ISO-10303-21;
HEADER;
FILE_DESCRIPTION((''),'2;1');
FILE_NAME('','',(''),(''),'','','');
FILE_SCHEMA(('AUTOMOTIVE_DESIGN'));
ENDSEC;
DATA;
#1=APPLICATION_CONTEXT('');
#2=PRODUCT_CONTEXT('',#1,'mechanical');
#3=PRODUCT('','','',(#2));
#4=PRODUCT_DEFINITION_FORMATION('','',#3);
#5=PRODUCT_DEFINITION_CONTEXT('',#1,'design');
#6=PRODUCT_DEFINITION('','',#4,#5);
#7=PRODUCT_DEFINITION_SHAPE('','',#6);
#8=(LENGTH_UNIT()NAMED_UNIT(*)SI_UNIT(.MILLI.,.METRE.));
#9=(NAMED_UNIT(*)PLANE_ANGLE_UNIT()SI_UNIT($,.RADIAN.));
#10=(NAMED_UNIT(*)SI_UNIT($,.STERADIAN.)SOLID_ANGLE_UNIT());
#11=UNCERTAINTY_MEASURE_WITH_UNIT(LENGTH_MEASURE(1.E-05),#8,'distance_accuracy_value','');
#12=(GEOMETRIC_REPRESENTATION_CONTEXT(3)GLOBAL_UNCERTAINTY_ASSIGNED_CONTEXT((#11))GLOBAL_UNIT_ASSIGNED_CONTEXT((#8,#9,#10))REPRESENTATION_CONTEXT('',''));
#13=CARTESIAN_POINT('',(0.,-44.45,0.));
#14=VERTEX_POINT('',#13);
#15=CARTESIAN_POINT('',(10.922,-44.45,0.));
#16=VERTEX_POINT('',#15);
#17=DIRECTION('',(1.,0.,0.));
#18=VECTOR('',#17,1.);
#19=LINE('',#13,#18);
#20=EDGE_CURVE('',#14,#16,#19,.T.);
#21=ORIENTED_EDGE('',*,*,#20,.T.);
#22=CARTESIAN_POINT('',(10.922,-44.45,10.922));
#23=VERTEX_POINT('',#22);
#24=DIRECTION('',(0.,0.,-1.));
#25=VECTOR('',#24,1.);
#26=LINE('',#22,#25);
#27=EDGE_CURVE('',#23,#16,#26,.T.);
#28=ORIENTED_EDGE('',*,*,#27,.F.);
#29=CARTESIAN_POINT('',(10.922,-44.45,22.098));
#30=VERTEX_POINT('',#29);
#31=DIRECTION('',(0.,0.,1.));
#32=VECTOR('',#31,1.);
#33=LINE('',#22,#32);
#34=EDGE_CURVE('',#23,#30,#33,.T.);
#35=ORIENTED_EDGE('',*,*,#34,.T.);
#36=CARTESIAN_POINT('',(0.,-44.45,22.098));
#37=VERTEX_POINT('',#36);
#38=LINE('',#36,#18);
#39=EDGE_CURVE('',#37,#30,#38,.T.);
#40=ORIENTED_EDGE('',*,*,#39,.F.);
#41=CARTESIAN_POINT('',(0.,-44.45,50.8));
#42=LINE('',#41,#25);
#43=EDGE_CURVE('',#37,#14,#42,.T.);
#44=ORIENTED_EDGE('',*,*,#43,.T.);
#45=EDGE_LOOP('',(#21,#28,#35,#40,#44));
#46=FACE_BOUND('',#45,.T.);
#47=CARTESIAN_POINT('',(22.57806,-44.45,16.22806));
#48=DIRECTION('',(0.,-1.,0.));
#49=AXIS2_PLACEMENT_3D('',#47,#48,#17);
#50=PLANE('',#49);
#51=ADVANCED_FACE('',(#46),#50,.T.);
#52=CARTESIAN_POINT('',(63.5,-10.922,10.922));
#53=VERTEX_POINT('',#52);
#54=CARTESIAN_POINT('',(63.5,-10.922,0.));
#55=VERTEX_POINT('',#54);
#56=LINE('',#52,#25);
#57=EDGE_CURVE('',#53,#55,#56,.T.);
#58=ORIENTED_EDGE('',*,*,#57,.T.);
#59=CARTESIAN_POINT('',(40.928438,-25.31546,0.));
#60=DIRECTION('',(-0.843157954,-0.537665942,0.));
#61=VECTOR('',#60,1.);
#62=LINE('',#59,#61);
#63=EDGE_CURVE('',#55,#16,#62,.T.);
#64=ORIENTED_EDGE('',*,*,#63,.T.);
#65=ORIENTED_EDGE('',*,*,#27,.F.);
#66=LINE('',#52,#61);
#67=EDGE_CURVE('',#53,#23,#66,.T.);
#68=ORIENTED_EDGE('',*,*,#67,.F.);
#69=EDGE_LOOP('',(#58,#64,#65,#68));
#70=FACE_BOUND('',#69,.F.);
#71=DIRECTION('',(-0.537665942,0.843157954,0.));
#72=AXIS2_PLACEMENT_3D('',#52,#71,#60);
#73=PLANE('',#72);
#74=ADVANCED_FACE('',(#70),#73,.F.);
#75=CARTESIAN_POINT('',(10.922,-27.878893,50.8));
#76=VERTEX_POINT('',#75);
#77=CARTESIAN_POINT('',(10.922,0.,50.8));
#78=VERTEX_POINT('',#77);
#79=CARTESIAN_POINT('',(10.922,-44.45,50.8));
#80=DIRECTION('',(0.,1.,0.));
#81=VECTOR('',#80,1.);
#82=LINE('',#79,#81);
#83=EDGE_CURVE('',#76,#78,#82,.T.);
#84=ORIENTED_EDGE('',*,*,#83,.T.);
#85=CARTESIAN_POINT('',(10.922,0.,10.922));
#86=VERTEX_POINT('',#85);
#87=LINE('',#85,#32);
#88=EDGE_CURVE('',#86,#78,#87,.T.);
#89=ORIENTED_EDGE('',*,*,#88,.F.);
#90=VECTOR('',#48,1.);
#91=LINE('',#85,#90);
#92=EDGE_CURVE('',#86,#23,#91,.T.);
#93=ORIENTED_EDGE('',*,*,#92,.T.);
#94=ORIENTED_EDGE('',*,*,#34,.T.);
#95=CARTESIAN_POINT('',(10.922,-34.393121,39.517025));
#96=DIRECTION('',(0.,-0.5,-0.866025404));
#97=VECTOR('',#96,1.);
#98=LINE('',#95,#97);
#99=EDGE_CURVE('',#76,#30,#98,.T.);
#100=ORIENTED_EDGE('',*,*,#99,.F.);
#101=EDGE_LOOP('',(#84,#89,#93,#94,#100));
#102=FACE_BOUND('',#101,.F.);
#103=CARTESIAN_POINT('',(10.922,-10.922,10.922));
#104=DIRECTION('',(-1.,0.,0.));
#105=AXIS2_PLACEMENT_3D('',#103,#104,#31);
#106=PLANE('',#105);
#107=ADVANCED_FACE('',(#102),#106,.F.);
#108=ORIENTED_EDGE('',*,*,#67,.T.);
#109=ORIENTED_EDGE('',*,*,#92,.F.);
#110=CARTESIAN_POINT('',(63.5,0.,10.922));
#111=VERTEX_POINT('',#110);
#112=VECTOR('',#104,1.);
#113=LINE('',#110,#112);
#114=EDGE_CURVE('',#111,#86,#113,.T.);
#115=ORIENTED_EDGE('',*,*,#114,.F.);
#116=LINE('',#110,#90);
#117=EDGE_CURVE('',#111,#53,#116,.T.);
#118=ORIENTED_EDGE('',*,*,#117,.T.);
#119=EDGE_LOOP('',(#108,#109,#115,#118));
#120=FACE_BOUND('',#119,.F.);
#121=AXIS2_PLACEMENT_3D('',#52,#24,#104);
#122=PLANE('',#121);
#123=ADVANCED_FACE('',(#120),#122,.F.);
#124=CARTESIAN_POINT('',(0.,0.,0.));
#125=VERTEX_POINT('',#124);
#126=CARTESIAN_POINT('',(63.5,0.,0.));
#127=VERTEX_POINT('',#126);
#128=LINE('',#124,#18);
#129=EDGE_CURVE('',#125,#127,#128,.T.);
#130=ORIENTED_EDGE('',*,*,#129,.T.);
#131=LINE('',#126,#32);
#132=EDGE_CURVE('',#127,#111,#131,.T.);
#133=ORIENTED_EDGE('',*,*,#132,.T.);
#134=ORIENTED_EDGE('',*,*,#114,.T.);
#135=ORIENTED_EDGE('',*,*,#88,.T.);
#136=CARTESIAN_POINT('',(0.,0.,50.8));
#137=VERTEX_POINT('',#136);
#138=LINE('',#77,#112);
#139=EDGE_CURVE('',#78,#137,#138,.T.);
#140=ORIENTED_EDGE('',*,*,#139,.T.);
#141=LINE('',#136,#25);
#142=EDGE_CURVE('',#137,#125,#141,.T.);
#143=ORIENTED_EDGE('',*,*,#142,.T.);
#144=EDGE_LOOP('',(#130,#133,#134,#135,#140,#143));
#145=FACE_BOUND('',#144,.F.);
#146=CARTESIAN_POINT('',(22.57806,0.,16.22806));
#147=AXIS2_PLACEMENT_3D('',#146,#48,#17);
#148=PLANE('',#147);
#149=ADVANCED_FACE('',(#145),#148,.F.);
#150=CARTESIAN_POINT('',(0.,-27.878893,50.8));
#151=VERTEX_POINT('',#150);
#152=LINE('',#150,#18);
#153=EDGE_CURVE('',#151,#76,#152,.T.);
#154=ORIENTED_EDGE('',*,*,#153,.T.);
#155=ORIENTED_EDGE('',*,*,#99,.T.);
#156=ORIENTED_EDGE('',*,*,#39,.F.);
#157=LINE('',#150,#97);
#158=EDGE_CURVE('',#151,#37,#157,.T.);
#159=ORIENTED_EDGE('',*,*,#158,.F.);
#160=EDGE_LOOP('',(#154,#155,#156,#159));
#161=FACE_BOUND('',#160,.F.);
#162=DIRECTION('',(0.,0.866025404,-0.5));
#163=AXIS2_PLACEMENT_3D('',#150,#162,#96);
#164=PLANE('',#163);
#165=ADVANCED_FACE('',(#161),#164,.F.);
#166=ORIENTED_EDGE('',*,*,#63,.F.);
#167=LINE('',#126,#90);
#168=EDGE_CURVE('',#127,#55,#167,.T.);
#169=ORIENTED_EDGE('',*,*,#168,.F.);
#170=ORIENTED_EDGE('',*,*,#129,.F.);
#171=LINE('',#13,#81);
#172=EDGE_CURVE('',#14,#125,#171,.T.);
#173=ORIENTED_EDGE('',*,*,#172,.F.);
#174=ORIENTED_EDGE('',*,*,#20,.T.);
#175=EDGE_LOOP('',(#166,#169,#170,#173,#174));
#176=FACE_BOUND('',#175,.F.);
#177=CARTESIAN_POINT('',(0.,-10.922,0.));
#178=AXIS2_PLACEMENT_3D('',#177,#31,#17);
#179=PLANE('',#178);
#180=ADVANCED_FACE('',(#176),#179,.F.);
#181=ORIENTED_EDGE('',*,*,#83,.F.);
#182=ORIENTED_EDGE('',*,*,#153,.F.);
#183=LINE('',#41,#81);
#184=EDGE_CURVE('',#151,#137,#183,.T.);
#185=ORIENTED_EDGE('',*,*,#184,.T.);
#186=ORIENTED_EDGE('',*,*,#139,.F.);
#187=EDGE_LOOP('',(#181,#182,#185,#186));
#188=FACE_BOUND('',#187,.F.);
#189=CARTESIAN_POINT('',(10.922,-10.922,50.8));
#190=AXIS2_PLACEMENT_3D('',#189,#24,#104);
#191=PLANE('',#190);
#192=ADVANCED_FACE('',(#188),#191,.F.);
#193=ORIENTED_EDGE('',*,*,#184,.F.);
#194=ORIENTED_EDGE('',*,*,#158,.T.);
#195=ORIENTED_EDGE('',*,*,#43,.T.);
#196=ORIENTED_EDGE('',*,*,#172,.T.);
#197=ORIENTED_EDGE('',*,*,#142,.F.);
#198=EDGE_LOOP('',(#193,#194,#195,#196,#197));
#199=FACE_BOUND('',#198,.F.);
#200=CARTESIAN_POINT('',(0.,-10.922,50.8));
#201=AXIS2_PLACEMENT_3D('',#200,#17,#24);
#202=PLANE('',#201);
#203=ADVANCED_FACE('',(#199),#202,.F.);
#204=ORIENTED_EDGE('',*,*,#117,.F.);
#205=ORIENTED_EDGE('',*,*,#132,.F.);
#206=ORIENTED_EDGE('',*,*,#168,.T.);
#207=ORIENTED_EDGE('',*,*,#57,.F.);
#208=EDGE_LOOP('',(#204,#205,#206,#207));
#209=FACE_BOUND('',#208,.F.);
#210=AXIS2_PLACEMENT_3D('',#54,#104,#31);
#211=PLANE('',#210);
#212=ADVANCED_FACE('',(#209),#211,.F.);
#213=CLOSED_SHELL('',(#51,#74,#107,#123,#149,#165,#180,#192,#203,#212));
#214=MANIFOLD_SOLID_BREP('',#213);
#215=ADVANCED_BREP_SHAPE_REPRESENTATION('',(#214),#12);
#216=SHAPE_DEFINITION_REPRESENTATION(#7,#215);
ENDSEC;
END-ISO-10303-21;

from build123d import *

# Parameters (mm, degrees)
F1_DEPTH = 10.922
F3_DEPTH = 33.528
F5_DEPTH = 25.4
F7_DEPTH = 25.4


# Not quite as in the source:
# - a feature names something its author has since deleted; it is built from what else it names


with BuildPart() as f1:
    # F0 (on Front) → F1 (new body)
    with BuildSketch(Plane.XZ):
        Polygon((0, 50.8), (0, 0), (63.5, 0), (63.5, 10.922), (10.922, 10.922), (10.922, 50.8), align=None)
    extrude(amount=F1_DEPTH)

    # F2 (on face) → F3 (join)
    with BuildSketch(Plane.XZ.offset(10.922)):
        Polygon((0, 10.922), (0, 0), (10.922, 0), (63.5, 0), (63.5, 10.922), (10.922, 10.922), (10.922, 50.8), (0, 50.8), align=None)
    extrude(amount=F3_DEPTH)

    # F4 (on face) → F5 (cut)
    with BuildSketch(Plane.XY.offset(10.922)):
        Polygon((63.5, -10.922), (10.922, -44.45), (63.5, -44.45), align=None)
    extrude(amount=-F5_DEPTH, mode=Mode.SUBTRACT)

    # F6 (on face) → F7 (cut)
    with BuildSketch(Plane(origin=(0, 0, 0), x_dir=(0, -1, 0), z_dir=(-1, 0, 0))):
        Polygon((27.8788925737, 50.8), (44.45, 22.098), (44.45, 50.8), align=None)
    extrude(amount=-F7_DEPTH, mode=Mode.SUBTRACT)


solid = f1.part
